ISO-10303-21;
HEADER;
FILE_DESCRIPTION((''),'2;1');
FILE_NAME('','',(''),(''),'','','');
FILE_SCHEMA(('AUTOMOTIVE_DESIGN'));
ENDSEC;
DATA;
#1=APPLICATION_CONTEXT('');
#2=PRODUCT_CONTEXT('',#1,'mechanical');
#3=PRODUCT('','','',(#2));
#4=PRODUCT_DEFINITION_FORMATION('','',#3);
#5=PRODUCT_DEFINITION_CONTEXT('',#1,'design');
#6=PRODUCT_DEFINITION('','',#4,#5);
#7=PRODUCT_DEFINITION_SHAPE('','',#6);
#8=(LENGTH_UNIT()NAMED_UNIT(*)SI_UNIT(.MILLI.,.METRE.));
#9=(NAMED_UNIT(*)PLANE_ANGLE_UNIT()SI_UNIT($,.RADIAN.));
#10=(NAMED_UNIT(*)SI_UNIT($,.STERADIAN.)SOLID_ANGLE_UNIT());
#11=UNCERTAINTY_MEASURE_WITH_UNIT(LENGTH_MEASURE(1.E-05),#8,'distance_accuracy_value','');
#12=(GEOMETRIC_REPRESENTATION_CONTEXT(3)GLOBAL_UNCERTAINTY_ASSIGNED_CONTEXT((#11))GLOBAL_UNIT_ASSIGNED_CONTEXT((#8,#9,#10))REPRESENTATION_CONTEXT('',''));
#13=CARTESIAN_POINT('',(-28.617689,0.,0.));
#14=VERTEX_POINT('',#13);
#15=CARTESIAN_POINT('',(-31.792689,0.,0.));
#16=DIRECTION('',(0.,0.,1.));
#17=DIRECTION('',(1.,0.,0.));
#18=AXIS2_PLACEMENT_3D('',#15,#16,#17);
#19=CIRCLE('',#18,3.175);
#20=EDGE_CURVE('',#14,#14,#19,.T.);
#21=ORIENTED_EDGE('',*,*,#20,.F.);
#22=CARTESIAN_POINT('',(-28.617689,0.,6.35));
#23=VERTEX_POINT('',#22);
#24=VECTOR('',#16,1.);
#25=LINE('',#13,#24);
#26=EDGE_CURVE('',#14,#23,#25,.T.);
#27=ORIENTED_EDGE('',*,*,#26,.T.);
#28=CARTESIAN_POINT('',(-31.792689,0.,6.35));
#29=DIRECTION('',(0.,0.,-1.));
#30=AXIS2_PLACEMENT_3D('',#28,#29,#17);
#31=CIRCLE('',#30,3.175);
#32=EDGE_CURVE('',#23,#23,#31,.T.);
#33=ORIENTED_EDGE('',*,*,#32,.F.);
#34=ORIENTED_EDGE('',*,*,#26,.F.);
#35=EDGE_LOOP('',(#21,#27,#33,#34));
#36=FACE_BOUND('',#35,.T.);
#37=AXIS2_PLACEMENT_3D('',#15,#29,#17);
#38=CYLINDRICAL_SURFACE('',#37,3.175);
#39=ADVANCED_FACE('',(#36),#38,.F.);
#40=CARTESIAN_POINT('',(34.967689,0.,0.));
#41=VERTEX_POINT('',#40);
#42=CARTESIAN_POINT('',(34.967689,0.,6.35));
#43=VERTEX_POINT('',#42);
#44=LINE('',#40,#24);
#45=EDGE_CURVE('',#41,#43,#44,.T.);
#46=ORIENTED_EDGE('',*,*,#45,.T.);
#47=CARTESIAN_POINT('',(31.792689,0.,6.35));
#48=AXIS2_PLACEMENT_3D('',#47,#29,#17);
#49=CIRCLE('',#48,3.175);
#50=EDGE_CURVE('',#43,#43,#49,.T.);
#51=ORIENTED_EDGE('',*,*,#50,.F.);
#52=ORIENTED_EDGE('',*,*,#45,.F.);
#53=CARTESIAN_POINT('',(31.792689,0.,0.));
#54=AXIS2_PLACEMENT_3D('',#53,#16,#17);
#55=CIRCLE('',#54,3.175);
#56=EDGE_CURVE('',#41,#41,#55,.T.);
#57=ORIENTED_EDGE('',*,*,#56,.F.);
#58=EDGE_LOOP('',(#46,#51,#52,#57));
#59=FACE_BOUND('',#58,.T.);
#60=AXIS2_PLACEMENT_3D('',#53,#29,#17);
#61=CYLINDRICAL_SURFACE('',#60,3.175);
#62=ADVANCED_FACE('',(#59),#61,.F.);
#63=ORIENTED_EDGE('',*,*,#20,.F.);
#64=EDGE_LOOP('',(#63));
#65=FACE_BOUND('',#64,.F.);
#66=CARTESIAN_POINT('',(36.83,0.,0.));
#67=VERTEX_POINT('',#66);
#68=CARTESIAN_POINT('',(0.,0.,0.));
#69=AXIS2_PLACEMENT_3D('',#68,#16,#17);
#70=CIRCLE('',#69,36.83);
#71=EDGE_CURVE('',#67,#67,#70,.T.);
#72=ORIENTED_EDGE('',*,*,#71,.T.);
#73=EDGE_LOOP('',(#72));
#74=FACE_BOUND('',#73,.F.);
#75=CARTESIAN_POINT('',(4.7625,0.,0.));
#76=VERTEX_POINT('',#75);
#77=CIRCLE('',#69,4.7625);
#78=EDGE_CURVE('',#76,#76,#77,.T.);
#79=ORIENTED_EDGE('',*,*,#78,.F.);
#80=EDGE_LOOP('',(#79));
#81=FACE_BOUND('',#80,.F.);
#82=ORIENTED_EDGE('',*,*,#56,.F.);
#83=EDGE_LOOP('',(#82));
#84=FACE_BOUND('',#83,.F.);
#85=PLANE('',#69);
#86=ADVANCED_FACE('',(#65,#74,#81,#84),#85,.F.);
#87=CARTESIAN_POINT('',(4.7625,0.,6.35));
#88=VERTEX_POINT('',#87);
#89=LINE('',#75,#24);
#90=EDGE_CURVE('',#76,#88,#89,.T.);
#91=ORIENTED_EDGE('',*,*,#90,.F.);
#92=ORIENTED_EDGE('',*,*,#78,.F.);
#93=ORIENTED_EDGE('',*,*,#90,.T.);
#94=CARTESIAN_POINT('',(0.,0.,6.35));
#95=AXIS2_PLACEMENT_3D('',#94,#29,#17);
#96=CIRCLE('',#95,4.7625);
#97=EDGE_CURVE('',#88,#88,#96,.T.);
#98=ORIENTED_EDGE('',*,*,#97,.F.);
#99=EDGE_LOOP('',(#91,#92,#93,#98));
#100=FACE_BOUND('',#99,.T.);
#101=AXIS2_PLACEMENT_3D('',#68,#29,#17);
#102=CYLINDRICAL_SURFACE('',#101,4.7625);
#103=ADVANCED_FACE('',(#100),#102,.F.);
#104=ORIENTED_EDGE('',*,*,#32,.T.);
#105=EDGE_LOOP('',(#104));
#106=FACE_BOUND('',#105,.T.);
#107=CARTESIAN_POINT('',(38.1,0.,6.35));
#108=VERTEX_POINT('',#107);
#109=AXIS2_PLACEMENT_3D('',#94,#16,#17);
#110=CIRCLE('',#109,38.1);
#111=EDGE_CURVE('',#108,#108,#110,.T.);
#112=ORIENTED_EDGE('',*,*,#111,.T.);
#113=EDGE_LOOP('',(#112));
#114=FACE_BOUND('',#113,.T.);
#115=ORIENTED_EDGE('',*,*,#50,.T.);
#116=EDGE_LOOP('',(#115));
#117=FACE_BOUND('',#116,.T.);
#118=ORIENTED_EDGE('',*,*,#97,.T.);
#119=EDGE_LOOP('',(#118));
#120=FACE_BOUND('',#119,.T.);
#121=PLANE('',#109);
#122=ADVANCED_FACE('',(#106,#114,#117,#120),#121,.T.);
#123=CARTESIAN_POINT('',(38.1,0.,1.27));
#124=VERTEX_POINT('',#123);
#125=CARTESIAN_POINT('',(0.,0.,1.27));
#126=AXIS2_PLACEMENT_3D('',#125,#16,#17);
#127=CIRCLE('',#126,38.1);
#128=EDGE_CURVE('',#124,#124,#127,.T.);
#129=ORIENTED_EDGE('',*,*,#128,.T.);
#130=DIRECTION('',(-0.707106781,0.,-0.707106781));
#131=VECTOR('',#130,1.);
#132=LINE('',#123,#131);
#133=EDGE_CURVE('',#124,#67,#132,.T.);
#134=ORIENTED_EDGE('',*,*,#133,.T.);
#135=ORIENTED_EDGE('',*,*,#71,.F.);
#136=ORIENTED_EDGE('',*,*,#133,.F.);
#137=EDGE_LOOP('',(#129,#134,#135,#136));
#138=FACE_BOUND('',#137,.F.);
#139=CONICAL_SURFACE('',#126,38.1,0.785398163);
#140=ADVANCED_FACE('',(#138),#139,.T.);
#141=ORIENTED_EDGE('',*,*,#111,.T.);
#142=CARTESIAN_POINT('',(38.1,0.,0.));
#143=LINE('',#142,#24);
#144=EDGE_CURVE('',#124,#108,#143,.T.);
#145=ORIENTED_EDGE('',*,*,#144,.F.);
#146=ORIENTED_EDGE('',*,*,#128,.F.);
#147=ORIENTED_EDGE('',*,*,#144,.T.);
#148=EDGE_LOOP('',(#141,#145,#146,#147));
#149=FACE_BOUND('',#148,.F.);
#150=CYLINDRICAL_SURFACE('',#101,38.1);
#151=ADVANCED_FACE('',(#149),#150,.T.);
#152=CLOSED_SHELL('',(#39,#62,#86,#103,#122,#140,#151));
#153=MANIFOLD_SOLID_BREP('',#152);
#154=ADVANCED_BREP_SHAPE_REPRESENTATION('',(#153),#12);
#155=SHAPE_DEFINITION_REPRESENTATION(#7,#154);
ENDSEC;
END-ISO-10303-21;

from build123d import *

# Parameters (mm, degrees)
F0_R     = 38.1
F1_DEPTH = 6.35
F2_R     = 3.175
F2_R_2   = 4.7625
F3_DEPTH = 25.4
F4_SIZE  = 1.27


# Not quite as in the source:
# - a length typed as a fraction of an inch, garbled in the dataset ("3 / 203.2 mm" for 3/8 in), is restored


with BuildPart() as f1:
    # F0 (on Top) → F1 (new body)
    with BuildSketch(Plane.XY):
        Circle(F0_R)
    extrude(amount=F1_DEPTH)

    # F2 (on Top) → F3 (cut)
    with BuildSketch(Plane.XY):
        with Locations((-31.7926891148, 0)):
            Circle(F2_R)
        with Locations((31.7926891148, 0)):
            Circle(F2_R)
        Circle(F2_R_2)
    extrude(amount=F3_DEPTH, mode=Mode.SUBTRACT)

    # F4
    f4_edges = [f1.edges().sort_by_distance(p)[0] for p in [
        (-38.1, 0, 0),
    ]]
    chamfer(f4_edges, length=F4_SIZE)


solid = f1.part
